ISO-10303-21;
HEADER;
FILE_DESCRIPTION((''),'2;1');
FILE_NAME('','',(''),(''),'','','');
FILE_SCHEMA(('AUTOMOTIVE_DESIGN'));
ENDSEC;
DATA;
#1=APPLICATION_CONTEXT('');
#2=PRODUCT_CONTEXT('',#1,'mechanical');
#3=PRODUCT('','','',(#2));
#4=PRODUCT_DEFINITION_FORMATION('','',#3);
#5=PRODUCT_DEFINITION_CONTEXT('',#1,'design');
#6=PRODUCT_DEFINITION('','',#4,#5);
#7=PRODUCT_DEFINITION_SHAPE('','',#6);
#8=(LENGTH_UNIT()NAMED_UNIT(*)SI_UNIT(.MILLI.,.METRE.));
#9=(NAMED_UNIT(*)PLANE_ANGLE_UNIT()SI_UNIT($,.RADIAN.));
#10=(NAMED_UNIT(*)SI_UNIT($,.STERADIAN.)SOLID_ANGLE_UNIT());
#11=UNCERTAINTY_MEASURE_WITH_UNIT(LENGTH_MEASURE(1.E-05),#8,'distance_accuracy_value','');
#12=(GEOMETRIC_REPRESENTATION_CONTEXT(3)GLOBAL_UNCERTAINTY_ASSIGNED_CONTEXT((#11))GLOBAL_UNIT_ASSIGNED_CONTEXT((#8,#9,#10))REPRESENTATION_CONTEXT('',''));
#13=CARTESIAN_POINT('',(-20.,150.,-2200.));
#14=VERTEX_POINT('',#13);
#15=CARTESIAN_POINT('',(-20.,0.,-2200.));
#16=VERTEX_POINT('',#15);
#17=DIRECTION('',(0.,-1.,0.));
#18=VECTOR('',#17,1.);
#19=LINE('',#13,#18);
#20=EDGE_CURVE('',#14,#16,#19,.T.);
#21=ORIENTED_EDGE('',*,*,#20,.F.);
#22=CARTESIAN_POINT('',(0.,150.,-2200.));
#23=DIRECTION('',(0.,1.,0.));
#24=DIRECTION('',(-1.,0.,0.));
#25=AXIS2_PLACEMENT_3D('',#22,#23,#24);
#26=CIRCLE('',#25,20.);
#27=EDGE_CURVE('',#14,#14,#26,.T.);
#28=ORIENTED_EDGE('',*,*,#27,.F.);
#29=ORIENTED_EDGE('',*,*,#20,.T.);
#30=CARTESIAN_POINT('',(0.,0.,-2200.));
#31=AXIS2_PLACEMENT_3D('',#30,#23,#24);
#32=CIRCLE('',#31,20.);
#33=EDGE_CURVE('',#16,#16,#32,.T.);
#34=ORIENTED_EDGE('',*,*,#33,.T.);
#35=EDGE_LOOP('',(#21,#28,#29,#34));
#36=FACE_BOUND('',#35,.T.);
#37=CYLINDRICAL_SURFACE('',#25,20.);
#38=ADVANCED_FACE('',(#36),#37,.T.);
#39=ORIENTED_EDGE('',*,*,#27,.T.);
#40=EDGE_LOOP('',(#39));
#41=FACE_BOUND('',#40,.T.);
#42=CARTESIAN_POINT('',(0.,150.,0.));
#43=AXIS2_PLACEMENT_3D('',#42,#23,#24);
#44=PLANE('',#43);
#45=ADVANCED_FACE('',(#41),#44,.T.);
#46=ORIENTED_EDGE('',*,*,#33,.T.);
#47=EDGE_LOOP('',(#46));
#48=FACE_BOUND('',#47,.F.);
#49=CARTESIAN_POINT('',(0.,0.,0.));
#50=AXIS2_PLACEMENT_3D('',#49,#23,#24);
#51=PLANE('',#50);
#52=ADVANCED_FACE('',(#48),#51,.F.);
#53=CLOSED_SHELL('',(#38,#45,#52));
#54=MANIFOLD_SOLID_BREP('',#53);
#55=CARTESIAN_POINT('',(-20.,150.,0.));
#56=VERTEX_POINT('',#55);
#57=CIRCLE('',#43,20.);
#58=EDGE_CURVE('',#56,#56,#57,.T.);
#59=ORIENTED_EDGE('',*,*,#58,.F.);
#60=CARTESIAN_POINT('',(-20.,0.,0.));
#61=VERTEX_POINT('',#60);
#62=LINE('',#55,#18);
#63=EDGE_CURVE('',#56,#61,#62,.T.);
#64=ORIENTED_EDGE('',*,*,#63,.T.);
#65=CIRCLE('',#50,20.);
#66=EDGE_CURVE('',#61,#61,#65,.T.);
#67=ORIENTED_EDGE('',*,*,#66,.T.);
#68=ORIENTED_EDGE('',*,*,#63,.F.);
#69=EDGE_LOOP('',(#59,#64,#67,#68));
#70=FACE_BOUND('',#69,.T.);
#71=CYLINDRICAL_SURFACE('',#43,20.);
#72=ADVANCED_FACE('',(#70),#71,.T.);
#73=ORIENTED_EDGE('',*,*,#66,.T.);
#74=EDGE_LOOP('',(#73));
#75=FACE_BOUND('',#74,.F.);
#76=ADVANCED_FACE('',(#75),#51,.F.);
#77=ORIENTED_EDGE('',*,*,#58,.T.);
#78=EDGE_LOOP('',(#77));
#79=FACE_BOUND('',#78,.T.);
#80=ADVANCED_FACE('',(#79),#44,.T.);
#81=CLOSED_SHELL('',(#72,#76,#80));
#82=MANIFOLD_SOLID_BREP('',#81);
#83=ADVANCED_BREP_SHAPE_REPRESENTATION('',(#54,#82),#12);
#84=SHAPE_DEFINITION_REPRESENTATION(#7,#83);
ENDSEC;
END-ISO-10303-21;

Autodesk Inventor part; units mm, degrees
ref_plane "YZ Plane" through (0, 0, 0) normal (1, 0, 0) x (0, 1, 0)
ref_plane "XY Plane" through (0, 0, 0) normal (0, 0, 1) x (1, 0, 0)
sketch "Sketch1" plane through (0, 0, 0) normal (0, 1, 0) x (-1, 0, 0)
  line L0 (0, 0) -> (0, -2200) construction
  line L1 (-100, 0) -> (-100, -2200)
  line L2 (100, -2200) -> (100, 0)
  arc A0 (100, 0) -> (-100, 0) centre (0, 0) ccw
  arc A1 (-100, -2200) -> (100, -2200) centre (0, -2200) ccw
  circle A2 centre (0, 0) radius 20
  circle A3 centre (0, -2200) radius 20
  point P0 (0, -1100)
  dimension "d0" = 2200
  dimension "d1" = 100
  dimension "d2" = 40
  dimension "d3" = 40
ref_plane "Work Plane1" through (0, 150, 0) normal (0, 1, 0) x (-1, 0, 0)
sketch "Sketch2" plane through (0, 150, 0) normal (0, 1, 0) x (-1, 0, 0)
  line L0 (100, -2200) -> (100, 0) projected
  arc A0 (-100, -2200) -> (100, -2200) centre (0, -2200) ccw projected
  circle A1 centre (0, -2200) radius 20 projected
  line L1 (-100, 0) -> (-100, -2200) projected
  circle A2 centre (0, 0) radius 20 projected
  arc A3 (100, 0) -> (-100, 0) centre (0, 0) ccw projected
extrude "Extrusion1" add sketch "Sketch2" against normal up to surface (150 mm away) contours A1 | A2
properties part number "arm j2" material "Aluminum 6061"
